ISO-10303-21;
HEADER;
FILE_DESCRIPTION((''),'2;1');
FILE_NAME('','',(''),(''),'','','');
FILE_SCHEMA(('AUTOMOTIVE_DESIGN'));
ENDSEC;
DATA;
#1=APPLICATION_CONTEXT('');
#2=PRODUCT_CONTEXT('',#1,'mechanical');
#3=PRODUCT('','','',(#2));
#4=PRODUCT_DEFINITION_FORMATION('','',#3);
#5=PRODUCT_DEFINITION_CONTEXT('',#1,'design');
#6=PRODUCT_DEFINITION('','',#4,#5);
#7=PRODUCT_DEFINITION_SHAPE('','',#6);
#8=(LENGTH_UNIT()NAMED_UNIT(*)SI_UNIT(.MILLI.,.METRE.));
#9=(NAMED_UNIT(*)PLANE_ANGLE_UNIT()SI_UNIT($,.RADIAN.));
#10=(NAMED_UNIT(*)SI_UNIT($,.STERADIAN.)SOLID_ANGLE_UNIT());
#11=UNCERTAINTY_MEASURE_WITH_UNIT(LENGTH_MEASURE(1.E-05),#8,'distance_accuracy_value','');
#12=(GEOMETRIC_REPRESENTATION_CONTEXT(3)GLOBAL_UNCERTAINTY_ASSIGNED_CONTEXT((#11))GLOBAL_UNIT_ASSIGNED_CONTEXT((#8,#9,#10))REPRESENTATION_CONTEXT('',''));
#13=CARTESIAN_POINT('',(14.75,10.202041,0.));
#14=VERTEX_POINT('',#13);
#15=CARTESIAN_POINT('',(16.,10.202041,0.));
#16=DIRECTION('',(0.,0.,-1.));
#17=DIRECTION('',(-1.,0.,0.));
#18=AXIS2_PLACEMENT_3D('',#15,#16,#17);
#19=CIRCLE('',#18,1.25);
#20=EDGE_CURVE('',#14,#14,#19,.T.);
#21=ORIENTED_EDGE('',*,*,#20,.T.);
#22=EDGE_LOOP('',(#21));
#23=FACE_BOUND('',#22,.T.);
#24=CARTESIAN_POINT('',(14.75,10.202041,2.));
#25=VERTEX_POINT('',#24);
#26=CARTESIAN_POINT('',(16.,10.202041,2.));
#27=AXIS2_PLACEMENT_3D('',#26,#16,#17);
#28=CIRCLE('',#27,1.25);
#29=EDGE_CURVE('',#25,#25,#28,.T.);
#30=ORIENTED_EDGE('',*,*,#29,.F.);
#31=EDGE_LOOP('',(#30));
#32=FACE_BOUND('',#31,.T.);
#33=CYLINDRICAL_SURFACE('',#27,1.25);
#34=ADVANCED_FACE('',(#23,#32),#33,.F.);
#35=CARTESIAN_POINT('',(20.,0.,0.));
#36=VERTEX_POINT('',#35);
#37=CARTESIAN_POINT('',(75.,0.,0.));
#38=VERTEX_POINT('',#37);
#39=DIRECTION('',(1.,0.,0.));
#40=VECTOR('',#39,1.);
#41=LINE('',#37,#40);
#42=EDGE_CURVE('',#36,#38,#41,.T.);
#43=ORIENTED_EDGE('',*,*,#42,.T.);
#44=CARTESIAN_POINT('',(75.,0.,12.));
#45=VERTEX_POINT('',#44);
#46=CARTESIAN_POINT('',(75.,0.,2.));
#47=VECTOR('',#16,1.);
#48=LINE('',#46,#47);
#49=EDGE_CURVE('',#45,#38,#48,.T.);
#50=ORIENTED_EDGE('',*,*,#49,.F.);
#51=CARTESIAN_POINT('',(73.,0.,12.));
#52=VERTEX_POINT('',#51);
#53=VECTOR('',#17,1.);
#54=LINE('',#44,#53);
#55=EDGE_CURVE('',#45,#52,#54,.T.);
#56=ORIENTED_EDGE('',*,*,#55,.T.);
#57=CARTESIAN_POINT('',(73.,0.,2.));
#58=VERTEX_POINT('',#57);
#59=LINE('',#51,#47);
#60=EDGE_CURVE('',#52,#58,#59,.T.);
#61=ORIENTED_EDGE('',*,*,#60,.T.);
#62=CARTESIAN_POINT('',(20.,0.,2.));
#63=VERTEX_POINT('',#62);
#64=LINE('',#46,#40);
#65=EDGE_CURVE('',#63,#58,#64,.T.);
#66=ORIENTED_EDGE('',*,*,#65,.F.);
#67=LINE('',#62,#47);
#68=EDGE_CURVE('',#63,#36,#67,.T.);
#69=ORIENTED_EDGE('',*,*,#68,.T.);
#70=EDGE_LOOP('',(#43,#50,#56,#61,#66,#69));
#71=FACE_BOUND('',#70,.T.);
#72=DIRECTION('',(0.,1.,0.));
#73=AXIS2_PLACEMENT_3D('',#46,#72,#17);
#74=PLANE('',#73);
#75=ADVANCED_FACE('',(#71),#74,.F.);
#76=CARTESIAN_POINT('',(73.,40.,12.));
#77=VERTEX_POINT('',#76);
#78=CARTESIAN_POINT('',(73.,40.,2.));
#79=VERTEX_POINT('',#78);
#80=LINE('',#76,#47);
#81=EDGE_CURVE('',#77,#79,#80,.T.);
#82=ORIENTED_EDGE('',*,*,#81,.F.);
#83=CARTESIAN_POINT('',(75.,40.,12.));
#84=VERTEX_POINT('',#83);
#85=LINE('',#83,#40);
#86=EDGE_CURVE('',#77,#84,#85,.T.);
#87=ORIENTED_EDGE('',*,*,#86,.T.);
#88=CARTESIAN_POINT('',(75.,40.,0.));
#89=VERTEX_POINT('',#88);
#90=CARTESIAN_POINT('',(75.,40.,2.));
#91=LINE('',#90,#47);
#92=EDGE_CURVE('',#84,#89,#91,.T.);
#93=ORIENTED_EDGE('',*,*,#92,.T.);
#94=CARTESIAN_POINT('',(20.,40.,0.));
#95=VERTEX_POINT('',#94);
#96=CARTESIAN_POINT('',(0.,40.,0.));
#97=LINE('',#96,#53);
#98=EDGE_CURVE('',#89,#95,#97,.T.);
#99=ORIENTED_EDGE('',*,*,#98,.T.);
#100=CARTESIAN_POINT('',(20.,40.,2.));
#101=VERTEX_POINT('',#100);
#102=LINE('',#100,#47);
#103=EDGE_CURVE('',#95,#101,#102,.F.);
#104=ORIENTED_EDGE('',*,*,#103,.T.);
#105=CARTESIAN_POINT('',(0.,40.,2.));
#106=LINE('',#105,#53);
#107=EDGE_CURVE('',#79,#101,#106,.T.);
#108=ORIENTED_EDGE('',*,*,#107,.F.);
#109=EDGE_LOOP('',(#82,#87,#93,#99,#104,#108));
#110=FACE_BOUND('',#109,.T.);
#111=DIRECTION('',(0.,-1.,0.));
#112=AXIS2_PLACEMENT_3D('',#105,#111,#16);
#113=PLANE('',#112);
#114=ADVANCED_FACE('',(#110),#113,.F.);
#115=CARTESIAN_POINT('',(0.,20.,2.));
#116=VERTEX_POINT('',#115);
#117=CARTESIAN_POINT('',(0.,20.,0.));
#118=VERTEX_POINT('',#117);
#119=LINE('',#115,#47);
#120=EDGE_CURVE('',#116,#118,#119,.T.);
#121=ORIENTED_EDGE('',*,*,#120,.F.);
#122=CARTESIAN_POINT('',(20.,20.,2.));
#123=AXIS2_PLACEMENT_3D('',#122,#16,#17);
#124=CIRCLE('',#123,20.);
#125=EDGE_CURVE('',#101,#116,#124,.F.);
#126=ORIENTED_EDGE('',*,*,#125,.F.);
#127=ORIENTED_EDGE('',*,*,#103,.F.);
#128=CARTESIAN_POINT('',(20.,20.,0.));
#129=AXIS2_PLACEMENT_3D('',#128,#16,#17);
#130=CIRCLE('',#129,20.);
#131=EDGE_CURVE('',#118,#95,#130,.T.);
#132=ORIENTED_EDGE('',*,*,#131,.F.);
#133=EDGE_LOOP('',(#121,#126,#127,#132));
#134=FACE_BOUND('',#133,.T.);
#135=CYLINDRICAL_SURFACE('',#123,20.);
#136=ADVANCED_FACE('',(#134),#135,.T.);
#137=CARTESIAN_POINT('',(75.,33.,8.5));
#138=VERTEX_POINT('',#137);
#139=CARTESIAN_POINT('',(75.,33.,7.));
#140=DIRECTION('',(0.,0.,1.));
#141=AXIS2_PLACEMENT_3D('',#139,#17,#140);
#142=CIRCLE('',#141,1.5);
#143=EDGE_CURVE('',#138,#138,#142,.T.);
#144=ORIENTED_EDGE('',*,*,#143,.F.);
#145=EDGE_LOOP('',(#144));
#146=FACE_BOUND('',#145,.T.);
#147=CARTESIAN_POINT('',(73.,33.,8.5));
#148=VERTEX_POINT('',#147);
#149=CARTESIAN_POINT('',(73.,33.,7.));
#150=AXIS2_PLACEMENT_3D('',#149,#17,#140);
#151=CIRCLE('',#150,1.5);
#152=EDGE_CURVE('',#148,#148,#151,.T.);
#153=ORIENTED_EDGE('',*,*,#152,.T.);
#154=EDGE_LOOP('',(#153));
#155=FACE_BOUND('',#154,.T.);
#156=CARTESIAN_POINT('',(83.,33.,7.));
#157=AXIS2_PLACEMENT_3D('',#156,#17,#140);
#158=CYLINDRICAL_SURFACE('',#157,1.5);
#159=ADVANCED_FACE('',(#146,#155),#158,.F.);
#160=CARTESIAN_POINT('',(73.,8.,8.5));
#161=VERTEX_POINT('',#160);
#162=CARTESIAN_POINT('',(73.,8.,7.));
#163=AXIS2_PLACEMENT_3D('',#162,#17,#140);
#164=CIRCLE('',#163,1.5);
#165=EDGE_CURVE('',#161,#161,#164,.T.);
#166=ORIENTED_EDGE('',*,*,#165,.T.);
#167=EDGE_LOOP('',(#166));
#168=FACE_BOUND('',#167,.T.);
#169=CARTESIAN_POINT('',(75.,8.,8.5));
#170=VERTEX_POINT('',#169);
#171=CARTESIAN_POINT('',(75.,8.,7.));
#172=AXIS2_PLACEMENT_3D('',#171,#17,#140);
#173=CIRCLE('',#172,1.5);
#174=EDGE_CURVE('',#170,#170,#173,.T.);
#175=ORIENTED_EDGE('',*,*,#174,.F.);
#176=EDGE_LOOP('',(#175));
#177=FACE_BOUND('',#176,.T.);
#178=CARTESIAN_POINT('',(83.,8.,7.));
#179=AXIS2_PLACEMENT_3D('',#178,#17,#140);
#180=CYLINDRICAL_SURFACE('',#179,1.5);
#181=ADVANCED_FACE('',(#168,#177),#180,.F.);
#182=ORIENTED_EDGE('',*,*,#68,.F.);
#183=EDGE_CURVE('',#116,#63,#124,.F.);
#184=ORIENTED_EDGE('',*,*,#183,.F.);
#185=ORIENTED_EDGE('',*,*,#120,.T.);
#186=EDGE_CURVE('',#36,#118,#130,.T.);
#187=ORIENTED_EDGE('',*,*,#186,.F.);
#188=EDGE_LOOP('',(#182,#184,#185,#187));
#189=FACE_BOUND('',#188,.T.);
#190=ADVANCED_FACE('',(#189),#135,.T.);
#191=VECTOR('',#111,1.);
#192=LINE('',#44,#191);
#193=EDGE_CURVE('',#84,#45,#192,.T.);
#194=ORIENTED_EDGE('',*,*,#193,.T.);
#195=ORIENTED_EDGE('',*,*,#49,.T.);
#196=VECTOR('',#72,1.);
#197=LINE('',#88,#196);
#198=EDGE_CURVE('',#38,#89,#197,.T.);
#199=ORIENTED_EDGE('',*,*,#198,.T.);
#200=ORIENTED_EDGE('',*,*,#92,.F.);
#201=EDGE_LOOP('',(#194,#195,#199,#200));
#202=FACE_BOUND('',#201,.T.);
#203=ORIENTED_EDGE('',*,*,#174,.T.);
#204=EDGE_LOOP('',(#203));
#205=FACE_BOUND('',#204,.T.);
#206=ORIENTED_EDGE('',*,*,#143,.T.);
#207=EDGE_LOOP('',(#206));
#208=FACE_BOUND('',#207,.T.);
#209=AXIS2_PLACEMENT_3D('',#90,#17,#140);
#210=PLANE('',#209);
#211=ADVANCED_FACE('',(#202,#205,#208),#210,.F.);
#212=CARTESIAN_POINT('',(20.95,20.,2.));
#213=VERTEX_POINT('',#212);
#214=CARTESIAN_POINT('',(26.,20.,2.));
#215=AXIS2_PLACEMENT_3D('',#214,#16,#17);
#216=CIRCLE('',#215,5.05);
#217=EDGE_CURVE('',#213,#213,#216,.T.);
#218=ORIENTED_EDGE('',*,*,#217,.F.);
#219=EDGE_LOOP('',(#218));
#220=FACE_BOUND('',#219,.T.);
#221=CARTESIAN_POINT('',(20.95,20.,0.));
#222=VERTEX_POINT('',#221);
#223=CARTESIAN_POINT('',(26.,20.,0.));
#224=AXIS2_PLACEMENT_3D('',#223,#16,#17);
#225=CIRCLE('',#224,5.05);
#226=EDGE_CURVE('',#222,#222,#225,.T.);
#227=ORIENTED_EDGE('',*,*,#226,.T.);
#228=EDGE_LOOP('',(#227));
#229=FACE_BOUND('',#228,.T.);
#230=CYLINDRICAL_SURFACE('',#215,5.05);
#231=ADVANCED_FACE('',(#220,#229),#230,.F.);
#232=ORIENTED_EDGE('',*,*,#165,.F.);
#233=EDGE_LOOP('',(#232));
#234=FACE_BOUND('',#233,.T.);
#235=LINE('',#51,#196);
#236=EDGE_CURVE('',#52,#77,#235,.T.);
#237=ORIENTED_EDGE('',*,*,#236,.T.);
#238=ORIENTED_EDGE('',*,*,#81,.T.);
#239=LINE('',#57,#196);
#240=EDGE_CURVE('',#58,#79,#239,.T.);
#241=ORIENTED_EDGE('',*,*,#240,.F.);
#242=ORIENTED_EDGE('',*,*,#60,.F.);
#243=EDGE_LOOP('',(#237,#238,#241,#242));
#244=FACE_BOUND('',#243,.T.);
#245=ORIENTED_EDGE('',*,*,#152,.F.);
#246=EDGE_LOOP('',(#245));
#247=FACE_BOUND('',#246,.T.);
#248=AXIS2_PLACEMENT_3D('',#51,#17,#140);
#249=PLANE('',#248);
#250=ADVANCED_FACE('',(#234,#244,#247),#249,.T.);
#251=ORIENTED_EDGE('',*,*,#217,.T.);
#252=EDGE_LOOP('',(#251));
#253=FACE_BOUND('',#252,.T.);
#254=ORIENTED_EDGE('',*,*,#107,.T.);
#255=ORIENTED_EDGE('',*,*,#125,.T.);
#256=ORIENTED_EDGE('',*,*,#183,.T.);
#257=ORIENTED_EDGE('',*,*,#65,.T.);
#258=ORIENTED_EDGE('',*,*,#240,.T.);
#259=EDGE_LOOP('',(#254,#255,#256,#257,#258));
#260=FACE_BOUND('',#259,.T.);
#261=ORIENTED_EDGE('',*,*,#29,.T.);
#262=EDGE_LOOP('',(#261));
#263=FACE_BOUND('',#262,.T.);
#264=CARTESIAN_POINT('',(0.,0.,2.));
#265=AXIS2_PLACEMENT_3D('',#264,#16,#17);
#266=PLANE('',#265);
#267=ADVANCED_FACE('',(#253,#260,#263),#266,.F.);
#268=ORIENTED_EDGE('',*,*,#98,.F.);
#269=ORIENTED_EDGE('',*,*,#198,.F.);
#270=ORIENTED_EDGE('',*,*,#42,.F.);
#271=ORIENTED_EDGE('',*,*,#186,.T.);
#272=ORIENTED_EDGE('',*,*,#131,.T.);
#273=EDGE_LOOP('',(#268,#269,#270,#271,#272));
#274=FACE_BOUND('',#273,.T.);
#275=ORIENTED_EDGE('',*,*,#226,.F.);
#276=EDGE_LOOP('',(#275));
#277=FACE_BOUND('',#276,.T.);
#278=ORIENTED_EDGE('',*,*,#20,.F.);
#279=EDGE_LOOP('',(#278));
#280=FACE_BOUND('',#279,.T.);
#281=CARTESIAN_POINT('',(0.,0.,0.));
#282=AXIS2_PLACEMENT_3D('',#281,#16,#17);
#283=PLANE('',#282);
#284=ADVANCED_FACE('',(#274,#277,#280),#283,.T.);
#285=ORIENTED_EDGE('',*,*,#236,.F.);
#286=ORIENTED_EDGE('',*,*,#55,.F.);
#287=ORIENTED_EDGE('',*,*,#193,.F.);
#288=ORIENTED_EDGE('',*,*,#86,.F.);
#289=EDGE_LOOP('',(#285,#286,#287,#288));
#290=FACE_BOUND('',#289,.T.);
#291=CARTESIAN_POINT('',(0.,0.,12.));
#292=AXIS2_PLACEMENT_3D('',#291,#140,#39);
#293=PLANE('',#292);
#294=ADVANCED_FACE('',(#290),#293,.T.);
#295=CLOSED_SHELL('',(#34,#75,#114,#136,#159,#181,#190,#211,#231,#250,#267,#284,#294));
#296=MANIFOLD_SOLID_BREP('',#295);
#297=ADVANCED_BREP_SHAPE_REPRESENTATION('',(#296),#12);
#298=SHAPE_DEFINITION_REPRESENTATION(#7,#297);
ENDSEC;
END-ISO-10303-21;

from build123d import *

# Parameters (mm, degrees)
SKETCH_2_W          = 75
SKETCH_2_H          = 40
EXTRUDE_1_DEPTH     = 2
SKETCH_3_R          = 5.05
SKETCH_3_R_2        = 1.25
CUT_EXTRUDE_1_DEPTH = 86.023526156
FILLET_1_R          = 20
SKETCH_7_W          = 2
SKETCH_7_H          = 40
EXTRUDE_3_DEPTH     = 12
SKETCH_8_R          = 1.5
CUT_EXTRUDE_2_DEPTH = 10


with BuildPart() as part:
    # 草图2 → 凸台-拉伸1 (new body)
    with BuildSketch(Plane.XY):
        with Locations((37.5, 20)):
            Rectangle(SKETCH_2_W, SKETCH_2_H)
    extrude(amount=EXTRUDE_1_DEPTH)

    # 草图3 → 切除-拉伸1 (cut, through all)
    with BuildSketch(Plane(origin=(0, 0, 0), x_dir=(-1, 0, 0), z_dir=(0, 0, -1))):
        with Locations((-26, 20)):
            Circle(SKETCH_3_R)
        with Locations((-16, 10.202041029)):
            Circle(SKETCH_3_R_2)
    extrude(amount=-CUT_EXTRUDE_1_DEPTH, mode=Mode.SUBTRACT)

    # 圆角1
    fillet_1_edges = [part.edges().sort_by_distance(p)[0] for p in [
        (0, 40, 1),
        (0, 0, 1),
    ]]
    fillet(fillet_1_edges, radius=FILLET_1_R - 0.0001)  # a hair under: the kernel refuses the full size

    # 草图7 → 凸台-拉伸3 (add)
    with BuildSketch(Plane(origin=(0, 0, 0), x_dir=(-1, 0, 0), z_dir=(0, 0, -1))):
        with Locations((-74, 20)):
            Rectangle(SKETCH_7_W, SKETCH_7_H)
    extrude(amount=-EXTRUDE_3_DEPTH)

    # 草图8 → 切除-拉伸2 (cut)
    with BuildSketch(Plane.ZY.offset(-73)):
        with Locations((7, 33)):
            Circle(SKETCH_8_R)
        with Locations((7, 8)):
            Circle(SKETCH_8_R)
    extrude(amount=-CUT_EXTRUDE_2_DEPTH, mode=Mode.SUBTRACT)


solid = part.part
